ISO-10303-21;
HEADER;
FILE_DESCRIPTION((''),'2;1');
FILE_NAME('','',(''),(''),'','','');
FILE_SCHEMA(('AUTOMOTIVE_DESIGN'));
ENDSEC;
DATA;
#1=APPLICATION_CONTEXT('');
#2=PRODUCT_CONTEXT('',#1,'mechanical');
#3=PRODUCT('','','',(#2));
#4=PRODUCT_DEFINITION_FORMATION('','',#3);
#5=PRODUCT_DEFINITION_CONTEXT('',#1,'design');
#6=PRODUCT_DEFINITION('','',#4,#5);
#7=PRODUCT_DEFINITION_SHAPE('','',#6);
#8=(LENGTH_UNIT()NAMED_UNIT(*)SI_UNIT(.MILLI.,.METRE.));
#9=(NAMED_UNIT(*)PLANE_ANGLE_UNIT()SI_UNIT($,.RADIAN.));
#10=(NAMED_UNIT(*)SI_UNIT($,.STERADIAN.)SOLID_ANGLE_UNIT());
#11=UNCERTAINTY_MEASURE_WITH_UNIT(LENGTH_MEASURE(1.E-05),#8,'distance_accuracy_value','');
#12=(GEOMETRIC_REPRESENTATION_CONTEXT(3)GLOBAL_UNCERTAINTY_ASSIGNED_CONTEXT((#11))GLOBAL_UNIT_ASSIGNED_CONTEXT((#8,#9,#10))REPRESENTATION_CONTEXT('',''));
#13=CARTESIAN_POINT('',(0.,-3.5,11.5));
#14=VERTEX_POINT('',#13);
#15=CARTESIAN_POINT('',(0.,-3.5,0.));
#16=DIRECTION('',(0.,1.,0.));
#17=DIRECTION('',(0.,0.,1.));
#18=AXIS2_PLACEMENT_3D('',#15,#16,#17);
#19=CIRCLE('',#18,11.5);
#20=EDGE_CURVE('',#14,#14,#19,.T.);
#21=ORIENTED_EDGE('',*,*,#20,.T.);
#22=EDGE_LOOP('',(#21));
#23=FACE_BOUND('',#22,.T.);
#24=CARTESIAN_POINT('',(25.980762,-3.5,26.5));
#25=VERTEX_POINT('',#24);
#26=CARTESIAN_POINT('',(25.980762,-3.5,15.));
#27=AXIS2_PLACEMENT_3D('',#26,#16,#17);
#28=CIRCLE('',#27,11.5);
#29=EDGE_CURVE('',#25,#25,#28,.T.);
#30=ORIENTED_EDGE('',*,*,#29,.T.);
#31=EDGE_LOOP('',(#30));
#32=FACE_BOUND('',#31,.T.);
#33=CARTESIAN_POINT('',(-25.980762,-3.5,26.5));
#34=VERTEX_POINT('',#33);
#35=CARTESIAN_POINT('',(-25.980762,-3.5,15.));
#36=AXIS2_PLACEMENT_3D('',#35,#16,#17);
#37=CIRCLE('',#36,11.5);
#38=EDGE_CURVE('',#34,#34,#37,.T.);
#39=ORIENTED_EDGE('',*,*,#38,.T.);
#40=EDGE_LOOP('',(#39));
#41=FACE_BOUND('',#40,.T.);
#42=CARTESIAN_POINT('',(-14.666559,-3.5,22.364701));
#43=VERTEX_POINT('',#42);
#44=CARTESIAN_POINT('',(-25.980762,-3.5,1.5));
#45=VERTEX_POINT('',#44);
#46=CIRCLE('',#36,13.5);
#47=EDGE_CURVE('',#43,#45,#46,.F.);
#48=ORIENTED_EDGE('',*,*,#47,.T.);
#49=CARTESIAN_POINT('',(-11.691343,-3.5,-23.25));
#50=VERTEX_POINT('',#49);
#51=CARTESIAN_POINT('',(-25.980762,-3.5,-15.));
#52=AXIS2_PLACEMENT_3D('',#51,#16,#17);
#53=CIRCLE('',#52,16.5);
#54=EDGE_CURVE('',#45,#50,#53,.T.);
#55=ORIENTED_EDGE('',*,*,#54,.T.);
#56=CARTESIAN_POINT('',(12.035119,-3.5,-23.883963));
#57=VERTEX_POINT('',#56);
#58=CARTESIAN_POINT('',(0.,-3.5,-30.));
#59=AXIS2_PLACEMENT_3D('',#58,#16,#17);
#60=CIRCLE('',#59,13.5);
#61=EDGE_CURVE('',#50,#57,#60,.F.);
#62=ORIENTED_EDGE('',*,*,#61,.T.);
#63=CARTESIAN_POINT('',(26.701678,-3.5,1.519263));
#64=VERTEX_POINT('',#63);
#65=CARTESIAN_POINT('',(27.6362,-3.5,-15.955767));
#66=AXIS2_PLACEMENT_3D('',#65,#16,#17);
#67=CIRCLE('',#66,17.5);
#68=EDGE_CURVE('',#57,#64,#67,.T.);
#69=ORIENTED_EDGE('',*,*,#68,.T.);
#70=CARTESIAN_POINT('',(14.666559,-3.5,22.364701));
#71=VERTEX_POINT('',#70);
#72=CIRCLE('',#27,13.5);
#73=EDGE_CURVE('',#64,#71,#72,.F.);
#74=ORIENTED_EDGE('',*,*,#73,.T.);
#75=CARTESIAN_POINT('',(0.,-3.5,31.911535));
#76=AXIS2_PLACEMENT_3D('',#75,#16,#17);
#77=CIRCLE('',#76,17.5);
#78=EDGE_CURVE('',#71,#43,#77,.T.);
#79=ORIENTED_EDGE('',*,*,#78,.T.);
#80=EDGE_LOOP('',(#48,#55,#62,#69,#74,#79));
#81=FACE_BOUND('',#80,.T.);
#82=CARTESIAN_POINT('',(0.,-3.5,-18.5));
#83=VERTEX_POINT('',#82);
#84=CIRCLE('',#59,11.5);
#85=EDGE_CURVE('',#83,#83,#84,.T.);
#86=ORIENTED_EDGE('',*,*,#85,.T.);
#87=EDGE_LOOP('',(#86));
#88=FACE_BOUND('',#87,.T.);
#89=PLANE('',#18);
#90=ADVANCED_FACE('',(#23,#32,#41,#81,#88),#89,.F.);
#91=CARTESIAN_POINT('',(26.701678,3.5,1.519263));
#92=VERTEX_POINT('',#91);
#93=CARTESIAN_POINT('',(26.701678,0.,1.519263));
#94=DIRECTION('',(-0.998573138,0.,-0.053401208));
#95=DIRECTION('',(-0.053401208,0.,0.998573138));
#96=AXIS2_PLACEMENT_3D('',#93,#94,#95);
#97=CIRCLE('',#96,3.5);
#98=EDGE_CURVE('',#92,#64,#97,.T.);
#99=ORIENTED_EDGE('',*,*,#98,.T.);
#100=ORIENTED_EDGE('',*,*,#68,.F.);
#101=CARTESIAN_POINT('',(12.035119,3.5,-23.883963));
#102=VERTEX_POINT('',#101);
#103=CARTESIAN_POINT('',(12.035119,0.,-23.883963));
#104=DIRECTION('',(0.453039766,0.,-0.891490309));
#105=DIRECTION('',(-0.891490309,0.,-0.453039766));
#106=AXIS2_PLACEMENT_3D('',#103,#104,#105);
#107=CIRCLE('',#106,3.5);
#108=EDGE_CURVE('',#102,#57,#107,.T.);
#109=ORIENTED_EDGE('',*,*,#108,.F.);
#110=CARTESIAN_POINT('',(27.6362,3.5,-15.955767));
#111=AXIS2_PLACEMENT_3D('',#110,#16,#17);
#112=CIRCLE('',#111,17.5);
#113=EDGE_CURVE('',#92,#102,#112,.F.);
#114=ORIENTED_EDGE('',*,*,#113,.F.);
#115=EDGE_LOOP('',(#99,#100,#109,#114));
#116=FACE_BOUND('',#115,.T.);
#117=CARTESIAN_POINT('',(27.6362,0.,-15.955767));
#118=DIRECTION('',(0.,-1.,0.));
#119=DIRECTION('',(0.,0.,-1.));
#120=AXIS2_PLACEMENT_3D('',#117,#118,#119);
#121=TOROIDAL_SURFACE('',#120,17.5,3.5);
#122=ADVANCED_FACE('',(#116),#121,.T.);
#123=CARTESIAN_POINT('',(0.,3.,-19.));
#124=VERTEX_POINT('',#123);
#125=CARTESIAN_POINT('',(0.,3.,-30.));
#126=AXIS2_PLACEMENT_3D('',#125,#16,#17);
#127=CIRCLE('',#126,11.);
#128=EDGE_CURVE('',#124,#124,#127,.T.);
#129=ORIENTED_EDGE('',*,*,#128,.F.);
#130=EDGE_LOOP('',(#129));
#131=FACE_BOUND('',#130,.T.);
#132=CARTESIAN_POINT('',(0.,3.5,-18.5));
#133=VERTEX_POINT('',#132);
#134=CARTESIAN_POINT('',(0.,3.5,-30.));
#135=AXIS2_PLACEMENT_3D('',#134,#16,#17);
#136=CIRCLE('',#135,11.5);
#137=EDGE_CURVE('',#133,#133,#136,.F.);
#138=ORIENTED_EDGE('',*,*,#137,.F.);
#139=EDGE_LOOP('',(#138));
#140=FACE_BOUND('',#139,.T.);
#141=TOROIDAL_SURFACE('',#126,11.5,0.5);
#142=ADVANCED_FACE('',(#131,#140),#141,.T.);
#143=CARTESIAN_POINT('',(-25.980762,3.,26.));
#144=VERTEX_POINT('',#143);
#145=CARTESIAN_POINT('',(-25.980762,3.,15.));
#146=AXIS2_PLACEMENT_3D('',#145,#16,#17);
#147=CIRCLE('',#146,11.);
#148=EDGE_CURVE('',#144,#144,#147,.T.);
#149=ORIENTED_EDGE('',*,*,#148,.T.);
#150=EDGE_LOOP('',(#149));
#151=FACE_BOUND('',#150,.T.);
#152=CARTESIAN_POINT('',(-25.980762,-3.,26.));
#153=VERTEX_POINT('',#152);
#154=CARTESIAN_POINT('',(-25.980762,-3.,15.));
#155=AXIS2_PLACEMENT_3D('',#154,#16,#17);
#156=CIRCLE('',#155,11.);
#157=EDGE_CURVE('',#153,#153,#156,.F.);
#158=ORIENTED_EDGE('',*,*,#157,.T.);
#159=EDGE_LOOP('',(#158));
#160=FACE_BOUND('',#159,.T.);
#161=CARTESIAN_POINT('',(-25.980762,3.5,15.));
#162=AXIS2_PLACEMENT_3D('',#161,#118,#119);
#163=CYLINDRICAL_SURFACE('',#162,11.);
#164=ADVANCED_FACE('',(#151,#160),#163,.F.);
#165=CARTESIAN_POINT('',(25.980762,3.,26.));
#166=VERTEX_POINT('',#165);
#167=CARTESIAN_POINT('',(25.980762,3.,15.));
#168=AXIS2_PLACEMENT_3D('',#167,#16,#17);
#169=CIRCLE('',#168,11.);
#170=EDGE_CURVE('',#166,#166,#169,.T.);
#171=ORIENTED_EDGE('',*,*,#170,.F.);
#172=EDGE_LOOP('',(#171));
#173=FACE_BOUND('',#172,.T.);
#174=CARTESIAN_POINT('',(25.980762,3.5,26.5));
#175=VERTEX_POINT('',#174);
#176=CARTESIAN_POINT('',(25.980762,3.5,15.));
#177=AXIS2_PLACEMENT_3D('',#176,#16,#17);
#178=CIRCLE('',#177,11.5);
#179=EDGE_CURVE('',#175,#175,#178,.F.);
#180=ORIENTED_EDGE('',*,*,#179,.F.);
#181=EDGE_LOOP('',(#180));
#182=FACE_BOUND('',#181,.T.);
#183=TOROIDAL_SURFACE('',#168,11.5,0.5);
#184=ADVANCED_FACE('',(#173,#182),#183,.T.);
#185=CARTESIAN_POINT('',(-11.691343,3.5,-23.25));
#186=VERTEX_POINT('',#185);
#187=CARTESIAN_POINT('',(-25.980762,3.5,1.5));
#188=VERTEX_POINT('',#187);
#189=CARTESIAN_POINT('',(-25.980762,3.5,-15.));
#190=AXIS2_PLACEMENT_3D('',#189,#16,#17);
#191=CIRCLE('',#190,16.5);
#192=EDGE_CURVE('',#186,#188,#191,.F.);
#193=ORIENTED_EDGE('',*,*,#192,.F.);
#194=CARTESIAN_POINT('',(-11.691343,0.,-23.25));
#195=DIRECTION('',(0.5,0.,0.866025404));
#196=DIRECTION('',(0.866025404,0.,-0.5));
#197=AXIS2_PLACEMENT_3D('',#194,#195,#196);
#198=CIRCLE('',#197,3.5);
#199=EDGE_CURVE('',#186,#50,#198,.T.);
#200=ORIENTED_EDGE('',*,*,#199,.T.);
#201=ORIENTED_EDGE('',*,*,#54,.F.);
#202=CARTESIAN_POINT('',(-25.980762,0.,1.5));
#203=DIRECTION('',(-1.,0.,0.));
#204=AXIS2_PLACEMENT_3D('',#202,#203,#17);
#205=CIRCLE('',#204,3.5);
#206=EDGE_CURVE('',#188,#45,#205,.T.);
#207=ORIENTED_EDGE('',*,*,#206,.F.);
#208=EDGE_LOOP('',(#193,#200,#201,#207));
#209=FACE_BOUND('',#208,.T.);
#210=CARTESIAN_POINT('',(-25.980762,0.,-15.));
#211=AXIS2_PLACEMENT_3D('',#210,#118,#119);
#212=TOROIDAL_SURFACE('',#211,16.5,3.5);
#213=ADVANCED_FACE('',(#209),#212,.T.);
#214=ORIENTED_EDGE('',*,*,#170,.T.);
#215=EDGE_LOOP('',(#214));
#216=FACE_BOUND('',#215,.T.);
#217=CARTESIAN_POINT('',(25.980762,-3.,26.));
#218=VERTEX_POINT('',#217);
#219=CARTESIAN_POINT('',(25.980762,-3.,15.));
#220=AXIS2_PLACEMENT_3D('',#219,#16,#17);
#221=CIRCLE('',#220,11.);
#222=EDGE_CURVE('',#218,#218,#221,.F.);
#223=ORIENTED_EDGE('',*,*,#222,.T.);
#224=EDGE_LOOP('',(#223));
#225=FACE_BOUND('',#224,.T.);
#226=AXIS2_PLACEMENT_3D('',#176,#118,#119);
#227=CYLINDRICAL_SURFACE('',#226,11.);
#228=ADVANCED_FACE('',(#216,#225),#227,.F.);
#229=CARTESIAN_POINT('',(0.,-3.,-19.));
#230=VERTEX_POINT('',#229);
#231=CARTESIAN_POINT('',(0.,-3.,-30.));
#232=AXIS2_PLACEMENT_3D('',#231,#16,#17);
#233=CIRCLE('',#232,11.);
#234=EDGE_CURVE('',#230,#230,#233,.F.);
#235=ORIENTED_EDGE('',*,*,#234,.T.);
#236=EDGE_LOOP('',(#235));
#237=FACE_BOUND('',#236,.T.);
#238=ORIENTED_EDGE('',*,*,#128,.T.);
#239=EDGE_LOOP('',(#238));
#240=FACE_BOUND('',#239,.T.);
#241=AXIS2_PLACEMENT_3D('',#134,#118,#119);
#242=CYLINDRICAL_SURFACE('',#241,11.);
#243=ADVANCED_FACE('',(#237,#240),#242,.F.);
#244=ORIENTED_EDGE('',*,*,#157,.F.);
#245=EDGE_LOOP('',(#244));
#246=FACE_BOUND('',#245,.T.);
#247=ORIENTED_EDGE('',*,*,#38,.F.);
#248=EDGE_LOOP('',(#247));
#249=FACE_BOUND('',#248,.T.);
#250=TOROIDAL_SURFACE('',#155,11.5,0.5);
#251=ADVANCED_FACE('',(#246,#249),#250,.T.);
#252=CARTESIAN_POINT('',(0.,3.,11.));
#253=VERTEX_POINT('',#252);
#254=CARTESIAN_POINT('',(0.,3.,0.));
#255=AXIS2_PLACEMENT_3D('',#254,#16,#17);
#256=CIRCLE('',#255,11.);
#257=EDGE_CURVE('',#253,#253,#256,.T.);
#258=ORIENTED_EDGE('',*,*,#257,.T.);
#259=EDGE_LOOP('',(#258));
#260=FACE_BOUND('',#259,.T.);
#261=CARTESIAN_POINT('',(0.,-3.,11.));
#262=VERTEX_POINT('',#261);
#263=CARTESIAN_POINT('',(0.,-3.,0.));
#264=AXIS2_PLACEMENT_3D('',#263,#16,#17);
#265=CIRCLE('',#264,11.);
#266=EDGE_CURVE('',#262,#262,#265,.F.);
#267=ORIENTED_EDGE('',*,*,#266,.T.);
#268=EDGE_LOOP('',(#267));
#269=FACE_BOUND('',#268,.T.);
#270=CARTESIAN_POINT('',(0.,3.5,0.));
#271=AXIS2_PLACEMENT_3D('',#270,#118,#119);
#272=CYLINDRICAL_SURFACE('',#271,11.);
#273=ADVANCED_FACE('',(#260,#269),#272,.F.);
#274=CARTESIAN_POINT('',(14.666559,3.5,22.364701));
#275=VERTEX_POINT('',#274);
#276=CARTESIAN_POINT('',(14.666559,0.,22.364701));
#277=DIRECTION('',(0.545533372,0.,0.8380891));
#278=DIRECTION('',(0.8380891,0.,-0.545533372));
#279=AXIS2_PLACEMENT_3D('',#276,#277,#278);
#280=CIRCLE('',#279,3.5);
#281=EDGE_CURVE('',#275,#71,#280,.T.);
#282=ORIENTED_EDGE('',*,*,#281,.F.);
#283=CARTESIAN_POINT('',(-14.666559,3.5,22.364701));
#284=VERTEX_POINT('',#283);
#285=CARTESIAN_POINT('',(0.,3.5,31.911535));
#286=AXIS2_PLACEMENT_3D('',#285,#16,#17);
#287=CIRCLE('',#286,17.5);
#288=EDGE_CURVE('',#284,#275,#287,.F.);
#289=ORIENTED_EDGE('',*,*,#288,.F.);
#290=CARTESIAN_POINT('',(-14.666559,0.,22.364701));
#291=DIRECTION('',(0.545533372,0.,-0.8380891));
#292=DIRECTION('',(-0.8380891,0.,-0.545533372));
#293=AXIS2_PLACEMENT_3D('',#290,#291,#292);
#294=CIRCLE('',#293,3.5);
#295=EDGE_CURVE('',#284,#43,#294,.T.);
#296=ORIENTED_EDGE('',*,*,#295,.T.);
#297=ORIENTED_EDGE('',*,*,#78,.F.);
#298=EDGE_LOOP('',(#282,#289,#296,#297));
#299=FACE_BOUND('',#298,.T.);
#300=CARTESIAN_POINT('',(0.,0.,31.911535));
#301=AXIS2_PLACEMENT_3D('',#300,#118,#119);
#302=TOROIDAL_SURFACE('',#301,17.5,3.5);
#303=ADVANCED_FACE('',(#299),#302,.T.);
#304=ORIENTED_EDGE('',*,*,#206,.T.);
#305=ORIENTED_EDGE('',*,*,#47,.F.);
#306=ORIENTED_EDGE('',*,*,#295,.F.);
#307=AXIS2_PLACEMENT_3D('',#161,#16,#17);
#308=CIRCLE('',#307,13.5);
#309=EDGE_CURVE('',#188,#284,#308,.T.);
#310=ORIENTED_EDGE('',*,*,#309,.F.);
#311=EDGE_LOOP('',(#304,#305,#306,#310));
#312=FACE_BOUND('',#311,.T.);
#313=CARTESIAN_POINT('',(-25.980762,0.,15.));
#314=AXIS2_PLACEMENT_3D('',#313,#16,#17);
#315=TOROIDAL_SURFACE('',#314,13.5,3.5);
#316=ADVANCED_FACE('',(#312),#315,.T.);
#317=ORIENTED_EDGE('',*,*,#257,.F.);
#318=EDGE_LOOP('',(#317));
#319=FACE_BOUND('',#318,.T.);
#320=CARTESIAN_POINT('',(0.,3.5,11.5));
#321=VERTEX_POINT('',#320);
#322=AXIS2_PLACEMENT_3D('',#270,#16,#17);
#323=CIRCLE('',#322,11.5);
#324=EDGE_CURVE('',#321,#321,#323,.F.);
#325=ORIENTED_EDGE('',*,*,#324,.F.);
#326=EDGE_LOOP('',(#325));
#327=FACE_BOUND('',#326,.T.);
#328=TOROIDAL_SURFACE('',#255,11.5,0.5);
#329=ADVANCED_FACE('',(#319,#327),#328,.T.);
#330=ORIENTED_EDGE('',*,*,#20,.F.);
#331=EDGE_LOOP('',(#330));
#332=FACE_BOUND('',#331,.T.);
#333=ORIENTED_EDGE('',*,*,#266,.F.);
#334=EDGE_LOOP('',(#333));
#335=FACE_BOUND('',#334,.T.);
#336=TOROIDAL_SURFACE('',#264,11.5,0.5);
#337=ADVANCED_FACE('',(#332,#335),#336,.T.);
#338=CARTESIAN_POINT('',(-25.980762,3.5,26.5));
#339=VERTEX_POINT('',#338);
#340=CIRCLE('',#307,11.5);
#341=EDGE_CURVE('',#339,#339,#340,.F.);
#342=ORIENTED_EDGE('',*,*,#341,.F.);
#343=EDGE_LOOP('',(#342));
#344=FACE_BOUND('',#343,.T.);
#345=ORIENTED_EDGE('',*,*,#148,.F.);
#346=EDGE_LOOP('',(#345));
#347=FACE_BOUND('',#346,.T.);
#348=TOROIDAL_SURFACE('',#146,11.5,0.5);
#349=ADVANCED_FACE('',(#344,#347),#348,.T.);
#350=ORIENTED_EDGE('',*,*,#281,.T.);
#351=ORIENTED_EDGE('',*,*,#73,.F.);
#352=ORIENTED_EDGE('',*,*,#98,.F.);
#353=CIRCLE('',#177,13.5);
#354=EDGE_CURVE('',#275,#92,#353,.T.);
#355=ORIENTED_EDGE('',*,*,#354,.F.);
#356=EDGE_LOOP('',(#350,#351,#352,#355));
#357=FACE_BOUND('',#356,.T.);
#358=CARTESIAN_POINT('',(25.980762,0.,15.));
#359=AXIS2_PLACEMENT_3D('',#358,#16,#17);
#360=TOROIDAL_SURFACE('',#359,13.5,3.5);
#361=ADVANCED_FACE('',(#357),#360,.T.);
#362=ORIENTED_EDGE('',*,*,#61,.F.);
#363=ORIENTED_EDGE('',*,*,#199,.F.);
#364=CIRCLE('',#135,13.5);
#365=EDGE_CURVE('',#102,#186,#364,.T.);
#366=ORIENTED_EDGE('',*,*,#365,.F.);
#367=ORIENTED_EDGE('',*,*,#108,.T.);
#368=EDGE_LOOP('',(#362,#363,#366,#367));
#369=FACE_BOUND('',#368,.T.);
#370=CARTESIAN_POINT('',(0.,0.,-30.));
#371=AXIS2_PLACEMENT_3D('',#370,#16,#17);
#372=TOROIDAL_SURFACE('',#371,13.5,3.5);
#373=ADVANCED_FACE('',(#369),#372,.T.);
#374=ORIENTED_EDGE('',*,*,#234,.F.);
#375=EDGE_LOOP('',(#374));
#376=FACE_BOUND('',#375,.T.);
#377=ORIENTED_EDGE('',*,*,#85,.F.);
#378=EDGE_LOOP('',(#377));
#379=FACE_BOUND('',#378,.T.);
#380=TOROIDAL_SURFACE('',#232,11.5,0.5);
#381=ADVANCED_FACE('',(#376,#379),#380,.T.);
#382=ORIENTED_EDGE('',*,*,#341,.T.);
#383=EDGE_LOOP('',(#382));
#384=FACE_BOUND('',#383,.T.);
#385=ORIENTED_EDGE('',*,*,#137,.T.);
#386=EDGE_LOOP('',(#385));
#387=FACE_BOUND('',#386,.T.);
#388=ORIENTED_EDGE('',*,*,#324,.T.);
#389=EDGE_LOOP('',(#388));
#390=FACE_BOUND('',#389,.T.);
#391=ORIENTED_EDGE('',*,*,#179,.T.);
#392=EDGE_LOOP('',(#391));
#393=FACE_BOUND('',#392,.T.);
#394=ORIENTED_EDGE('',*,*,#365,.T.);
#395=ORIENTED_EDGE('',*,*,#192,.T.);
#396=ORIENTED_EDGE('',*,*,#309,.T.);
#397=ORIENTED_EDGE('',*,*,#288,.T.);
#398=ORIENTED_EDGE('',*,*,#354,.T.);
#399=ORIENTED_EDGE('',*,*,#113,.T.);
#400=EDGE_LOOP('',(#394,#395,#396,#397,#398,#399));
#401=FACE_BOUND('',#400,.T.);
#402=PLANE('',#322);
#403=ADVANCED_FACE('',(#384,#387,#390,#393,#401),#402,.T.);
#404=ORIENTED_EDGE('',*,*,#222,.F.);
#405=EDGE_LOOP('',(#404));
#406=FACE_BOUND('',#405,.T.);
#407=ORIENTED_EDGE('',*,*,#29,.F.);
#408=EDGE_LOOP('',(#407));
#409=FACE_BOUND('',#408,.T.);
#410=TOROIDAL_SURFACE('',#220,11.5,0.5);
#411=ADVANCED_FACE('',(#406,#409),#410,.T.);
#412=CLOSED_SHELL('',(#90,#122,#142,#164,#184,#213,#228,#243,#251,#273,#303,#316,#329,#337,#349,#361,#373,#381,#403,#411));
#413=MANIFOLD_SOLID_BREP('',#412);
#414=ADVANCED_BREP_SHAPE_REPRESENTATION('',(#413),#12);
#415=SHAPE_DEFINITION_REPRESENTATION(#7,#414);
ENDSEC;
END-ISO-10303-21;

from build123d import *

# Parameters (mm, degrees)
SKETCH1_R           = 11
BOSS_EXTRUDE1_DEPTH = 3.5
FILLET1_R           = 3.5
FILLET2_R           = 0.5


with BuildPart() as part:
    # Sketch1 → Boss-Extrude1 (new, symmetric)
    with BuildSketch(Plane(origin=(0, 0, 0), x_dir=(1, 0, 0), z_dir=(0, 1, 0))):
        with BuildLine():
            ThreePointArc((15.15533525, 22.298323983), (-0.454072275, 46.993934752), (-14.722431864, 21.5))
            ThreePointArc((-14.722431864, 21.5), (-14.722431864, 8.5), (-25.980762114, 2))
            ThreePointArc((-25.980762114, 2), (-40.924977457, -23.103729251), (-11.733247406, -24.27406732))
            ThreePointArc((-11.733247406, -24.27406732), (0, -17.911534525), (11.733247406, -24.27406732))
            ThreePointArc((11.733247406, -24.27406732), (40.703193978, -23.5), (26.888582656, 1.975743338))
            ThreePointArc((26.888582656, 1.975743338), (15.51184392, 8.955767263), (15.15533525, 22.298323983))
        make_face()
        with Locations(Location((0, 30, 0), (0, 0, 270))):
            Circle(SKETCH1_R, mode=Mode.SUBTRACT)
        with Locations(Location((0, 0, 0), (0, 0, 270))):
            Circle(SKETCH1_R, mode=Mode.SUBTRACT)
        with Locations(Location((-25.980762114, -15, 0), (0, 0, 270))):
            Circle(SKETCH1_R, mode=Mode.SUBTRACT)
        with Locations(Location((25.980762114, -15, 0), (0, 0, 270))):
            Circle(SKETCH1_R, mode=Mode.SUBTRACT)
    extrude(amount=BOSS_EXTRUDE1_DEPTH, both=True)

    # Fillet1
    fillet1_edges = [part.edges().sort_by_distance(p)[0] for p in [
        (-14.722431864, 3.5, -8.5),
        (15.51184392, -3.5, -8.955767263),
        (40.703193978, -3.5, 23.5),
        (0, -3.5, 17.911534525),
        (-40.924977457, -3.5, 23.103729251),
        (-0.454072275, -3.5, -46.993934752),
    ]]
    fillet(fillet1_edges, radius=FILLET1_R - 0.0001)  # a hair under: the kernel refuses the full size

    # Fillet2
    fillet2_edges = [part.edges().sort_by_distance(p)[0] for p in [
        (-25.980762114, -3.5, 4),
        (25.980762114, -3.5, 4),
        (0, -3.5, -11),
        (0, -3.5, -41),
        (0, 3.5, -41),
        (0, 3.5, -11),
        (25.980762114, 3.5, 4),
        (-25.980762114, 3.5, 4),
    ]]
    fillet(fillet2_edges, radius=FILLET2_R)


solid = part.part
